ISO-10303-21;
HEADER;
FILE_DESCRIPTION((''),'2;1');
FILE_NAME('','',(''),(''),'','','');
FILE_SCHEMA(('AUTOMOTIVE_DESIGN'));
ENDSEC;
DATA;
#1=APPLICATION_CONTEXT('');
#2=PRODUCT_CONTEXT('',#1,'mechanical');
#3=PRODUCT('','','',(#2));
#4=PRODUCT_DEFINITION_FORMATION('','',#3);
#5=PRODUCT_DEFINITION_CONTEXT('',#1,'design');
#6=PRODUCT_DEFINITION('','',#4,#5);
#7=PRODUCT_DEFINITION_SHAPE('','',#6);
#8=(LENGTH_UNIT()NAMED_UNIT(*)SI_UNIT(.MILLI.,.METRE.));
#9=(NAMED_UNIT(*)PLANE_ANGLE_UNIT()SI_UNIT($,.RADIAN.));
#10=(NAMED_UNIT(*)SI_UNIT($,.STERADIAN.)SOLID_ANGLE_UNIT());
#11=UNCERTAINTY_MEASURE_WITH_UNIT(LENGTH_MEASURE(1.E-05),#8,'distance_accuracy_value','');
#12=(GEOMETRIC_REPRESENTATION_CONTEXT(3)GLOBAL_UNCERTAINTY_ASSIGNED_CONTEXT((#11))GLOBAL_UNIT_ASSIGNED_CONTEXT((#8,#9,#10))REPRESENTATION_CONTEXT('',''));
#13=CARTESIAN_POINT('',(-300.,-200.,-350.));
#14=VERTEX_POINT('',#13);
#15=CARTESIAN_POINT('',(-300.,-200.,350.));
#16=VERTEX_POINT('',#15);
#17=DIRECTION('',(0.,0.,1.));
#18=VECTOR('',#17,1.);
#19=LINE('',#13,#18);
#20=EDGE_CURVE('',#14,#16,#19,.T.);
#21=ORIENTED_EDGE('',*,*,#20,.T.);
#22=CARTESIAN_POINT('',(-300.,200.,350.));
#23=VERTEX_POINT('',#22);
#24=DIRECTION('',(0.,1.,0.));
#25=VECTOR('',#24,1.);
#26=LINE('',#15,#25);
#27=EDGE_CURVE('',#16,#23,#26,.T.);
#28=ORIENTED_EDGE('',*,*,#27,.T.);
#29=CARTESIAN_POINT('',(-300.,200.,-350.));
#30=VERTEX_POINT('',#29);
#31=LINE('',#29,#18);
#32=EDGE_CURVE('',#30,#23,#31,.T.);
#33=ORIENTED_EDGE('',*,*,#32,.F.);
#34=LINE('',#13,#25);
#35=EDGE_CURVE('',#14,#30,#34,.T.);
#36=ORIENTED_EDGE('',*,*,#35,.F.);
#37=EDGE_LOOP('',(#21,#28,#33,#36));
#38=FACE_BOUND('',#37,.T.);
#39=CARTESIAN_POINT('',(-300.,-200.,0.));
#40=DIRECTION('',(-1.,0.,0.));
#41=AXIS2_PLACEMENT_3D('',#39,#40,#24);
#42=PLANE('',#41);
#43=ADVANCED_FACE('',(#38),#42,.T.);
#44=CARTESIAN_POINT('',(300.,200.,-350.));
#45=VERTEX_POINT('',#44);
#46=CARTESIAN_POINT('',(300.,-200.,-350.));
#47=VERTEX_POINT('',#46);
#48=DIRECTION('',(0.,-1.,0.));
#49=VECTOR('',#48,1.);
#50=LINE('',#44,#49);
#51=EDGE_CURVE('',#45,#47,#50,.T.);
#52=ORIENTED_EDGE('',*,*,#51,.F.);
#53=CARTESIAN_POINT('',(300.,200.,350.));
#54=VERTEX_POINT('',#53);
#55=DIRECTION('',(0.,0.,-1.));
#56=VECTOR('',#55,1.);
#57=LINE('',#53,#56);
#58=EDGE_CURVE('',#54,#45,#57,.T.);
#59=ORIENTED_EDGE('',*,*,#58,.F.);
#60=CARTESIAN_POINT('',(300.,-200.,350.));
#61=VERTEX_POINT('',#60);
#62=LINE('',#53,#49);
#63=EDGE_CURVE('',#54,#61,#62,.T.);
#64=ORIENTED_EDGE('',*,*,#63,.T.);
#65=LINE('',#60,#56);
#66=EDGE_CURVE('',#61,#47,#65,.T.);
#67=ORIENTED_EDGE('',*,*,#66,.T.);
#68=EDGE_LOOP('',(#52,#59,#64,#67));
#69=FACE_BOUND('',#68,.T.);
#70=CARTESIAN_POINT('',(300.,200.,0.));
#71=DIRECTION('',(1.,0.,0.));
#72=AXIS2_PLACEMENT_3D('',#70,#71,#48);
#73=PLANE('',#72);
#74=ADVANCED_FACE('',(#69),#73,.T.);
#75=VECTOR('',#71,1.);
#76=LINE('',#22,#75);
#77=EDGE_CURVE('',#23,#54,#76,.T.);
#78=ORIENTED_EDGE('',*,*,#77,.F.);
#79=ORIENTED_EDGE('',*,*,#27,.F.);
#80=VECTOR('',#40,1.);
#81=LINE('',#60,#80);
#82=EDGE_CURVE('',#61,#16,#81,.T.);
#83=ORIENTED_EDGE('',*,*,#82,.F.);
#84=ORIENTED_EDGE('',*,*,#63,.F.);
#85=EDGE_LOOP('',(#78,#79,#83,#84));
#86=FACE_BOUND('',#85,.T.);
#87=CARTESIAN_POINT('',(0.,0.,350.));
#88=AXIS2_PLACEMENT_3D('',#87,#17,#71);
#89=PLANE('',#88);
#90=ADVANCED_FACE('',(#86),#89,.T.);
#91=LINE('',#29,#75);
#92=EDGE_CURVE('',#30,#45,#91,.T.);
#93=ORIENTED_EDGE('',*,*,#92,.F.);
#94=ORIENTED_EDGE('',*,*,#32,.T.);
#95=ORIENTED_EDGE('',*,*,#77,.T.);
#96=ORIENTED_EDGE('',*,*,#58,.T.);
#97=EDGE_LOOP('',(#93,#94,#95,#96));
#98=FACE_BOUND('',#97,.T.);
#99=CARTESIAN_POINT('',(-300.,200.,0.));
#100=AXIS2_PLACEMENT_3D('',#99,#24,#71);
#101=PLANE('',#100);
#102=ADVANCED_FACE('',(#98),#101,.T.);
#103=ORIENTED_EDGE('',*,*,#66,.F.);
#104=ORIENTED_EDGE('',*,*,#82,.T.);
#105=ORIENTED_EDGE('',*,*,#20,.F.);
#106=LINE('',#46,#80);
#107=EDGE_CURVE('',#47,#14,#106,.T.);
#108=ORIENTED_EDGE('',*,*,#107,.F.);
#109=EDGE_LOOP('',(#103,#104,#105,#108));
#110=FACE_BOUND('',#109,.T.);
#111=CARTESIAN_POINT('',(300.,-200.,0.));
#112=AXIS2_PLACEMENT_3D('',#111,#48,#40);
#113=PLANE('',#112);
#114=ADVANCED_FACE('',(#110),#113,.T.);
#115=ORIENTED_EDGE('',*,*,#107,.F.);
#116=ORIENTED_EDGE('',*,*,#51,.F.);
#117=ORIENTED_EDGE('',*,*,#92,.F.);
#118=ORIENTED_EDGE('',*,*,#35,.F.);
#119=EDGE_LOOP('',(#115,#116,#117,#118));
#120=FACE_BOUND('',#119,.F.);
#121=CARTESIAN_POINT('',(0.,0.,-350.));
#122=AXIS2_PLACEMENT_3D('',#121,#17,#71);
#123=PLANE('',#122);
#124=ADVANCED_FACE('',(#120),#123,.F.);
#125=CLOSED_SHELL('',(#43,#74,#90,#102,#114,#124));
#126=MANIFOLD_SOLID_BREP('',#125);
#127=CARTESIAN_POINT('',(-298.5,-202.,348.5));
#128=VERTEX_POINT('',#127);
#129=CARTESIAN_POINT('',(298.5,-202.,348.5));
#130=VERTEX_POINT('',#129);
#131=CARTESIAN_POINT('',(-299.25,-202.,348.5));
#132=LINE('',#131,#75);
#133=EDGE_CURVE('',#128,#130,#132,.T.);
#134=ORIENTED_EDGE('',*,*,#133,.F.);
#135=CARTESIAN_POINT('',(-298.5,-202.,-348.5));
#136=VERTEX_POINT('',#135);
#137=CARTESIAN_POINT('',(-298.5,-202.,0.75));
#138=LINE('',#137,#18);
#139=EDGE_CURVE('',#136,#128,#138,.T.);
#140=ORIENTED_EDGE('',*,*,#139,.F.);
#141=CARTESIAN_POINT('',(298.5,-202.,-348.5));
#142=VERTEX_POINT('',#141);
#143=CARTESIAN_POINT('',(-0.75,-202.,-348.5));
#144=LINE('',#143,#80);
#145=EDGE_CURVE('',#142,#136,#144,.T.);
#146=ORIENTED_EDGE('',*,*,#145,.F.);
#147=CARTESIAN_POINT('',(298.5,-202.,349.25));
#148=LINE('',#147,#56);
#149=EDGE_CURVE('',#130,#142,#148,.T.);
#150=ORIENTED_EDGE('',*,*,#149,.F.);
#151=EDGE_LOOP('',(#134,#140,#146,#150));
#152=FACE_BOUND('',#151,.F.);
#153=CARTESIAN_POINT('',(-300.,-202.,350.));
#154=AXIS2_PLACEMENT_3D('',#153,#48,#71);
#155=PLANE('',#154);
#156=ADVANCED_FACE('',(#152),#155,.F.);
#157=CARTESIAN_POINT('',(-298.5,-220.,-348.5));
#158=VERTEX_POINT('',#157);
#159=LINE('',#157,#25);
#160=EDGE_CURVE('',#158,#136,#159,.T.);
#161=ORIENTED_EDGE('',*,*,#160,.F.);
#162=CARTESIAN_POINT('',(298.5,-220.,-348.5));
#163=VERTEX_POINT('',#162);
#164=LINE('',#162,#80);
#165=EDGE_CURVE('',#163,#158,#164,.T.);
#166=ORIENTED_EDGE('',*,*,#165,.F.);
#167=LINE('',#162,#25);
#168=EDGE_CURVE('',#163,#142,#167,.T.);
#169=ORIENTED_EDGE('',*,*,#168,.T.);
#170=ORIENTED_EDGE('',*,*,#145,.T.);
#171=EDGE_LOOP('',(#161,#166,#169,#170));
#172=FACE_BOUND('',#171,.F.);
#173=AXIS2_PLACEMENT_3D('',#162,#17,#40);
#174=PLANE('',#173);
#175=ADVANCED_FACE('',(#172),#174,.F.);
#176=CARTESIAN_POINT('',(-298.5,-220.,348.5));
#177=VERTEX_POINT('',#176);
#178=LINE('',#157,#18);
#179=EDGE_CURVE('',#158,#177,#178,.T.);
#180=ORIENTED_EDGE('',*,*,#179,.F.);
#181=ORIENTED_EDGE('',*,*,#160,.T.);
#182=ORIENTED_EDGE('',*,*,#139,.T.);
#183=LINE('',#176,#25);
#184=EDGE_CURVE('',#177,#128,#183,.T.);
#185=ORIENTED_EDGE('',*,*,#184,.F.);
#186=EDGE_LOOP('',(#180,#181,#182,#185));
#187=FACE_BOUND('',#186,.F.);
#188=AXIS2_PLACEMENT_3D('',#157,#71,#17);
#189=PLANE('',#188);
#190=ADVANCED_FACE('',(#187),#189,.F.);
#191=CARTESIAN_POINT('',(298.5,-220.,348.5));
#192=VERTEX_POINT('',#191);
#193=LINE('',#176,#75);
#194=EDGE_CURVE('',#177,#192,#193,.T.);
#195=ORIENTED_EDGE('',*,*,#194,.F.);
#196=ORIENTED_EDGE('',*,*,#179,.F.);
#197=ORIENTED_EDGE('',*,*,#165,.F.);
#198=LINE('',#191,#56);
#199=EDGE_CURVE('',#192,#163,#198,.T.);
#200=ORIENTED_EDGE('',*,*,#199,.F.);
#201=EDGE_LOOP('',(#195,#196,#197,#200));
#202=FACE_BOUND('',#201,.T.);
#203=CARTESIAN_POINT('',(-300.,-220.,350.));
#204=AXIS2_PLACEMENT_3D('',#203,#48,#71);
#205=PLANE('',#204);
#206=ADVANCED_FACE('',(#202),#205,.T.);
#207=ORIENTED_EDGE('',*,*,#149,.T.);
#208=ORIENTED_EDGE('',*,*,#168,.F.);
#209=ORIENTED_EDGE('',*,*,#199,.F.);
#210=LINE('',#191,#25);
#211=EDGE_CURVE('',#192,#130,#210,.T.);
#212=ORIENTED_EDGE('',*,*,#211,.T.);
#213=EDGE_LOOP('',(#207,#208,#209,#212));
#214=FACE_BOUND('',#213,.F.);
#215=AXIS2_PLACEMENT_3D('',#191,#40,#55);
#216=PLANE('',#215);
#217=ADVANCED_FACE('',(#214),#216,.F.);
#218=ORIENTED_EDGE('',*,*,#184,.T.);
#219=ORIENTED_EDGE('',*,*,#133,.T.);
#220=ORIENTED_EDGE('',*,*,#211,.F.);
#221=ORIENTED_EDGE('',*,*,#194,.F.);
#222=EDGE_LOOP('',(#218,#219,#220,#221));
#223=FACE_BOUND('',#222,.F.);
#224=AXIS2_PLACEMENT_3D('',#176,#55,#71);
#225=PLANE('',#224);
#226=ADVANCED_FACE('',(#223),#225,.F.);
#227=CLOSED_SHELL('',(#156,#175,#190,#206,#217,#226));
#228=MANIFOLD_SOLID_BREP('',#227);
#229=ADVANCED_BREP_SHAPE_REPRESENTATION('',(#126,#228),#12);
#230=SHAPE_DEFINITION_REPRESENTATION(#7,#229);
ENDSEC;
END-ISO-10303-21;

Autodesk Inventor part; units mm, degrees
ref_plane "YZ Plane" through (0, 0, 0) normal (1, 0, 0) x (0, 1, 0)
ref_plane "XZ Plane" through (0, 0, 0) normal (0, 1, 0) x (-1, 0, 0)
ref_plane "XY Plane" through (0, 0, 0) normal (0, 0, 1) x (1, 0, 0)
sketch "Sketch1" plane through (0, 0, 0) normal (0, 0, 1) x (1, 0, 0)
  line L0 (-300, 200) -> (300, 200)
  line L1 (300, 200) -> (300, -200)
  line L2 (300, -200) -> (-300, -200)
  line L3 (-300, -200) -> (-300, 200)
  line L4 (-300, 200) -> (300, -200) construction
  line L5 (300, 200) -> (-300, -200) construction
  point P0 (0, 0)
  dimension "Width" = 600
  dimension "Depth" = 400
extrude "Extrusion1" add sketch "Sketch1" along normal mid plane 700
sketch "Sketch2" plane through (-300, -200, 350) normal (0, -1, 0) x (1, 0, 0)
  line L0 (600, 0) -> (600, -700) projected
  line L1 (0, 0) -> (600, 0) projected
  line L2 (0, 0) -> (0, -700) projected
  line L3 (600, -700) -> (0, -700) projected
  point P0 (300, -350)
extrude "Extrusion2" add sketch "Sketch2" against normal blind 18 separate body
sketch "Sketch4" plane through (-300, -200, 350) normal (0, -1, 0) x (1, 0, 0)
  line L0 (600, -700) -> (600, 0) construction
  line L1 (600, 0) -> (0, 0) construction
  line L2 (0, 0) -> (0, -700) construction
  line L3 (0, -700) -> (600, -700) construction
  line L4 (1.5, -1.5) -> (598.5, -1.5)
  line L5 (598.5, -1.5) -> (598.5, -698.5)
  line L6 (598.5, -698.5) -> (1.5, -698.5)
  line L7 (1.5, -698.5) -> (1.5, -1.5)
  point P0 (300, -350)
  dimension "Top_offset" = 1.5
  dimension "Bottom_offset" = 1.5
  dimension "Left_offset" = 1.5
  dimension "Right_offset" = 1.5
extrude "Extrusion3" cut sketch "Sketch4" against normal through all keep common part bodies 2
move or copy body "Move1" bodies to move or copy 2 copy no translate (0, -20, 0)
equation "\"d4\" = Panel_thickness"
equation "\"d8\" = -Panel_thickness - Front_offset"
equation "\"Panel_thickness\" = 18"
equation "\"Front_offset\" = 2"
properties part number "Simple door Skeleton"
